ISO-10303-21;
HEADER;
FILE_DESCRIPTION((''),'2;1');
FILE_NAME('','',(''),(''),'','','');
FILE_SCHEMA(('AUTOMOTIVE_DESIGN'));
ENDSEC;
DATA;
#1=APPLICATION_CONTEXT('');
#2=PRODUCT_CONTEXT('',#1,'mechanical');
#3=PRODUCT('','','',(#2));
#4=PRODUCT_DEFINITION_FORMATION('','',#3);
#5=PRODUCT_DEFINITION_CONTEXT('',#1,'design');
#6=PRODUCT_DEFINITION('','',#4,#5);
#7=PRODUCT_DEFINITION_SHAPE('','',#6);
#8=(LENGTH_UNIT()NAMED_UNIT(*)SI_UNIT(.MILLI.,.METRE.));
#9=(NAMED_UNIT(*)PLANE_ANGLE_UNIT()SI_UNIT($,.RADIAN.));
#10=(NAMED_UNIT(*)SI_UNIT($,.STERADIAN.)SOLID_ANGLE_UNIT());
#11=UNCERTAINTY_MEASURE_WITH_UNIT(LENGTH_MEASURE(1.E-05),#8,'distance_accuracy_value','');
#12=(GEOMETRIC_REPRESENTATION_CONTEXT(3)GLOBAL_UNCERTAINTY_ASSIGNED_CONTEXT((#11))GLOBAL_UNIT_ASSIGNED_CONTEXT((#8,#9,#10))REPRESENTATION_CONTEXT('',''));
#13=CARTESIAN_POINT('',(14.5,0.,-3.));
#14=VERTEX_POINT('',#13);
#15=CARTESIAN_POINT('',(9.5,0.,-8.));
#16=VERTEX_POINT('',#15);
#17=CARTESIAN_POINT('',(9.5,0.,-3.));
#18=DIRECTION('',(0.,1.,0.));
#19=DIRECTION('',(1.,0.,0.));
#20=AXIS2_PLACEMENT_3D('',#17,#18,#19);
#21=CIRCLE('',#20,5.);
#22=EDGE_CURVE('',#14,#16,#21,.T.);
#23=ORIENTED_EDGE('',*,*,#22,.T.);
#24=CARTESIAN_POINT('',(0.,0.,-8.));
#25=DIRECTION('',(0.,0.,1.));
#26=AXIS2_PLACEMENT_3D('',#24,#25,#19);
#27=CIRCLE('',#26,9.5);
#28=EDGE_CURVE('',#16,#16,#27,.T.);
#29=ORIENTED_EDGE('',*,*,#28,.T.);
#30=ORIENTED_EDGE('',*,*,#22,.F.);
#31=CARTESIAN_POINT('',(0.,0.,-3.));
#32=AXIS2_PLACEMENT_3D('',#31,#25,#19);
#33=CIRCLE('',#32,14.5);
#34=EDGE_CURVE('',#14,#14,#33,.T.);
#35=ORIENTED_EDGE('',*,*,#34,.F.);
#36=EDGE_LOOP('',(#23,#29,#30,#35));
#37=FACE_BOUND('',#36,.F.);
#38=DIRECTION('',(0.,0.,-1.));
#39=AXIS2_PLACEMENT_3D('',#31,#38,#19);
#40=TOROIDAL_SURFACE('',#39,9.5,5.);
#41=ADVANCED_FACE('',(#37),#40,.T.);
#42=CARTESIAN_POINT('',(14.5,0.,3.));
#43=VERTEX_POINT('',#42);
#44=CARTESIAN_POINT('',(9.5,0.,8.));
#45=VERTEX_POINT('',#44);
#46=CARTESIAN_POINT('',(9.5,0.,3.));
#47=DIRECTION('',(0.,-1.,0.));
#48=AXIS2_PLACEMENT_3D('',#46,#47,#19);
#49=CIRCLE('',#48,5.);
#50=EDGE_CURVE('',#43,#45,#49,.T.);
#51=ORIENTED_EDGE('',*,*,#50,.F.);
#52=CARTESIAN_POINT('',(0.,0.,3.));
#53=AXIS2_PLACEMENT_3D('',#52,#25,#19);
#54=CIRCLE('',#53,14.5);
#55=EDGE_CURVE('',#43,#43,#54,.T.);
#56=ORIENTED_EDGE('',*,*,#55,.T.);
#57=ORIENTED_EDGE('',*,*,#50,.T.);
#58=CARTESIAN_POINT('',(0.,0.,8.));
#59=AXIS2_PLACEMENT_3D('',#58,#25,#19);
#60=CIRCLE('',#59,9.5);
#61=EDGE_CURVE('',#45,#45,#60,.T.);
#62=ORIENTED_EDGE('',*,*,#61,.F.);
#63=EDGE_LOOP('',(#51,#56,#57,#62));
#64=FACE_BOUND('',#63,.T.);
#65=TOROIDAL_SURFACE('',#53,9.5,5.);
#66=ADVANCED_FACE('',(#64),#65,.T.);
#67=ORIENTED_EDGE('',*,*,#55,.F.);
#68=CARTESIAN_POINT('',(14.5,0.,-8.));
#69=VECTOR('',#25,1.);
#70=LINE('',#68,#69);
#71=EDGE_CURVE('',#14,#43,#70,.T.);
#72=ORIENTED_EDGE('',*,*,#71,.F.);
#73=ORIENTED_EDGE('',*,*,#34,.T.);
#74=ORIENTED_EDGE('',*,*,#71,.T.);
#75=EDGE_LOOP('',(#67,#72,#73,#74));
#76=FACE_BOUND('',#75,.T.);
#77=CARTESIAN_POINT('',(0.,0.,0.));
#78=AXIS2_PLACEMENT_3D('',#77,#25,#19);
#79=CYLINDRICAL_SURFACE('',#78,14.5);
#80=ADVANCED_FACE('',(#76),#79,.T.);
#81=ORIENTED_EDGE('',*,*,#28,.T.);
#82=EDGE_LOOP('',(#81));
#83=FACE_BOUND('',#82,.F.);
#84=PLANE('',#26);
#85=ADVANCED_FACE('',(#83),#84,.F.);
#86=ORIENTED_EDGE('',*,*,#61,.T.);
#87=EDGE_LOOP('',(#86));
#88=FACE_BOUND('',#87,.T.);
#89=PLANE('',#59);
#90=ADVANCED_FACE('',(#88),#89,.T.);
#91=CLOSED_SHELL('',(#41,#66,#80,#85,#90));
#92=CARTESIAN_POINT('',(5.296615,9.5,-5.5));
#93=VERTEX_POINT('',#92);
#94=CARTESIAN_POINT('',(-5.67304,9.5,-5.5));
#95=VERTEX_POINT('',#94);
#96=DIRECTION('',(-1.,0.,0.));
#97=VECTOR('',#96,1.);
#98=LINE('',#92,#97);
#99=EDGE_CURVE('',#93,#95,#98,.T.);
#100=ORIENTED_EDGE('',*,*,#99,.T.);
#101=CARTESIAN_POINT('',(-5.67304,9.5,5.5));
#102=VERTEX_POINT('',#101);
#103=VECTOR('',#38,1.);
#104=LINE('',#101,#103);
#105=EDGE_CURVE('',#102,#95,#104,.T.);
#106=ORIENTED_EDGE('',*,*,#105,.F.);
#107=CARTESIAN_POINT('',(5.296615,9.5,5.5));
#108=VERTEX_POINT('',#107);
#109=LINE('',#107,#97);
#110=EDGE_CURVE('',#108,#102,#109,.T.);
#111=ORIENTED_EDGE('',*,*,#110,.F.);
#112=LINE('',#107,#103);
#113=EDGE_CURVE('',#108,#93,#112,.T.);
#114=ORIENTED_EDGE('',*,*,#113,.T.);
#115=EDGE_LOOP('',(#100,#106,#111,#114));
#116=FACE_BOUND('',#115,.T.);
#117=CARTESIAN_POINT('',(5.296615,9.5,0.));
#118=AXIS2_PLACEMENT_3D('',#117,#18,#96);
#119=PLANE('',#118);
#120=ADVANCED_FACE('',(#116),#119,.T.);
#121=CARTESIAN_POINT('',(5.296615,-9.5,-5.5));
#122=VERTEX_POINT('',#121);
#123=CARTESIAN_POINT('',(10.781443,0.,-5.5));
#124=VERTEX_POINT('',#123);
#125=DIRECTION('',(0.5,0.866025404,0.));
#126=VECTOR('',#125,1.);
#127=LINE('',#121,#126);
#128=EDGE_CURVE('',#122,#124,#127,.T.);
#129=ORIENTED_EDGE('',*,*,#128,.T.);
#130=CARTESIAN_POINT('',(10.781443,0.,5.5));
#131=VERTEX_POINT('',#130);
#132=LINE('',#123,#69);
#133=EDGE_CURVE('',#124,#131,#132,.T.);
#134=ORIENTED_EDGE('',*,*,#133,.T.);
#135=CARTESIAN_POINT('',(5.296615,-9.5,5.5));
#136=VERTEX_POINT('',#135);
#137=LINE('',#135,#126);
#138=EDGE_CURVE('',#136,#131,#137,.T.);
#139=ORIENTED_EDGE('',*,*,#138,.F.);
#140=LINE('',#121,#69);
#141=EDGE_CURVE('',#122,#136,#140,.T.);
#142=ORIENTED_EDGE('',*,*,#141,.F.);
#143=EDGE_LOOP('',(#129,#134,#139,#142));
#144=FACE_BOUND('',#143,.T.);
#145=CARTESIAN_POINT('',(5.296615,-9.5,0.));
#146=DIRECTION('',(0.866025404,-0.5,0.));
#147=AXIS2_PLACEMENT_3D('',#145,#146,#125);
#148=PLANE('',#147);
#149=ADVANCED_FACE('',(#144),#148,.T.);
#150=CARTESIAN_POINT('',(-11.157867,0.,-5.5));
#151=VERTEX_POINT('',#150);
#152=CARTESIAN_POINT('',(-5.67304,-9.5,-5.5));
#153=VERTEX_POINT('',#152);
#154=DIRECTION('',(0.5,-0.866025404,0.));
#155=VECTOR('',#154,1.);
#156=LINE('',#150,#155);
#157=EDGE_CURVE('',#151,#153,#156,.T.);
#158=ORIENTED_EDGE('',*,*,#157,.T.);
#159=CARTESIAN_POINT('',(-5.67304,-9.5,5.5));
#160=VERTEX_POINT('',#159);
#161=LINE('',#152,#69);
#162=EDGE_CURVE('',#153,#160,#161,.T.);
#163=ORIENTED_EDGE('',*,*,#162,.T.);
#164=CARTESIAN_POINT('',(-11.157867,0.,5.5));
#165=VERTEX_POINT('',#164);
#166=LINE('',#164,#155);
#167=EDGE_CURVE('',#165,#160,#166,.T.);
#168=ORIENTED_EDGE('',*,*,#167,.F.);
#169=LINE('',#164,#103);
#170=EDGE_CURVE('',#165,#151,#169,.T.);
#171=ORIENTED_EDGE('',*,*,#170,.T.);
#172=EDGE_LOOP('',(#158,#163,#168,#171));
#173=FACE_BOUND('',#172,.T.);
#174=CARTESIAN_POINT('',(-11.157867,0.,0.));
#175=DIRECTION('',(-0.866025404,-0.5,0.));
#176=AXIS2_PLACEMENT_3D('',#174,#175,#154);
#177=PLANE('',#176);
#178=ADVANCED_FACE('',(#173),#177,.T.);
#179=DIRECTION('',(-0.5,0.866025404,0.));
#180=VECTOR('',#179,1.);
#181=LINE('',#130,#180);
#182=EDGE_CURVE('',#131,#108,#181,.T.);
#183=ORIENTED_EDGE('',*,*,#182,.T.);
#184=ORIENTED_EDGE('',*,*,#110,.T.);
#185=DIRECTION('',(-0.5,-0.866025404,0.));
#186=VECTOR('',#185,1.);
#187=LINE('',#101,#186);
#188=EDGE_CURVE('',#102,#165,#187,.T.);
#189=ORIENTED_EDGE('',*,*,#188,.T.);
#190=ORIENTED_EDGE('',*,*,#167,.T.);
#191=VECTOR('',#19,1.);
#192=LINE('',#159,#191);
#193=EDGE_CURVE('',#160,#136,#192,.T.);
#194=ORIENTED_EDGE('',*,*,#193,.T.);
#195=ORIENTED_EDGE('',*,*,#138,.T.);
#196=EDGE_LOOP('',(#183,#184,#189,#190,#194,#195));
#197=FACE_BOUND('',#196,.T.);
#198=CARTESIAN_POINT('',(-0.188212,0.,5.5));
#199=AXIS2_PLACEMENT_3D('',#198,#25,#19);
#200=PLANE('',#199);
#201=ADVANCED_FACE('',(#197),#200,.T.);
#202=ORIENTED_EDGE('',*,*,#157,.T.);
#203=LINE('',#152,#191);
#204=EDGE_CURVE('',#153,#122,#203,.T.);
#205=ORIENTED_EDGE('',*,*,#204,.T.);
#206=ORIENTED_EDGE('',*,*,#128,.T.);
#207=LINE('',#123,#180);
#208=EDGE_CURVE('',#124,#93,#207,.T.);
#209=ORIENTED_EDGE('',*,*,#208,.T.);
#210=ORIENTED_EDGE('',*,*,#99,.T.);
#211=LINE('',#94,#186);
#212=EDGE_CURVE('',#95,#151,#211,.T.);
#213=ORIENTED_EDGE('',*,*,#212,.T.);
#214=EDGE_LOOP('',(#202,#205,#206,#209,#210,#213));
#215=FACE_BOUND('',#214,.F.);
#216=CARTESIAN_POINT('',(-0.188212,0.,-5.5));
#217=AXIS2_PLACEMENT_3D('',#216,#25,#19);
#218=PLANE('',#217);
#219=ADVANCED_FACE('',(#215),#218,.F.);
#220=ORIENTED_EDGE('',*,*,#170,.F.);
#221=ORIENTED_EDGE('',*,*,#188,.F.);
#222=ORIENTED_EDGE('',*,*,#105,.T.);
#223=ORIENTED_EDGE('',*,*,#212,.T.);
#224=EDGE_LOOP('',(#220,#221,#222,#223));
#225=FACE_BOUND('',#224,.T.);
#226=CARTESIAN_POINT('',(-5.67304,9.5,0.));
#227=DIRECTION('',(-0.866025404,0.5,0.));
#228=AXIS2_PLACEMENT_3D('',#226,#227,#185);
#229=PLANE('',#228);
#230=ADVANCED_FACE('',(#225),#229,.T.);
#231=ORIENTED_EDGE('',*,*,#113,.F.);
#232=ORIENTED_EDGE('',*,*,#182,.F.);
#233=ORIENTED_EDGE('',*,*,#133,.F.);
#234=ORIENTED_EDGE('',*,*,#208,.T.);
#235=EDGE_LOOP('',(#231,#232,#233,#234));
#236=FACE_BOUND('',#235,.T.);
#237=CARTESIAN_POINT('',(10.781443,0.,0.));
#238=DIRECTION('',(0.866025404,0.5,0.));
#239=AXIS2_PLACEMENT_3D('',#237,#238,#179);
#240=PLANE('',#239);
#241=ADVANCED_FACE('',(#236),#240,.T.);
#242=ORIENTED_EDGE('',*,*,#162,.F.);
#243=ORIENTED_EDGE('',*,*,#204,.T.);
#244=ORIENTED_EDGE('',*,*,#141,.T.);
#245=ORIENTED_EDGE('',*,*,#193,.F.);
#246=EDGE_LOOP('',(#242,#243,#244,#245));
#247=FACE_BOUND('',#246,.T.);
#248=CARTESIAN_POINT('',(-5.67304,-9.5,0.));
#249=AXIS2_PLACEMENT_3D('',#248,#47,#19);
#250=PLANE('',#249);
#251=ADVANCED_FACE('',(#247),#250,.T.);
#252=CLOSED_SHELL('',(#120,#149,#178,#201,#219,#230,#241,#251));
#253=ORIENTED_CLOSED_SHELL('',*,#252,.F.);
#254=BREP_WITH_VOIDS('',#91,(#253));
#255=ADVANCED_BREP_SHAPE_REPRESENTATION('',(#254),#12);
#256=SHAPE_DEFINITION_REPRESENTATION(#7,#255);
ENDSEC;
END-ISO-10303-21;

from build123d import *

# Parameters (mm, degrees)
F1_R     = 14.5
F2_DEPTH = 8
F4_DEPTH = 5.5
F5_R     = 5


with BuildPart() as f2:
    # F1 (on Top) → F2 (new body, symmetric)
    with BuildSketch(Plane.XY):
        Circle(F1_R)
    extrude(amount=F2_DEPTH, both=True)

    # F3 (on Top) → F4 (cut, symmetric)
    with BuildSketch(Plane.XY):
        Polygon((-11.1578674376, 0), (-5.6730398803, -9.5), (5.2966152343, -9.5), (10.7814427916, 0), (5.2966152343, 9.5), (-5.6730398803, 9.5), align=None)
    extrude(amount=F4_DEPTH, both=True, mode=Mode.SUBTRACT)

    # F5
    f5_edges = [f2.edges().sort_by_distance(p)[0] for p in [
        (-14.5, 0, 8),
        (-14.5, 0, -8),
    ]]
    fillet(f5_edges, radius=F5_R)


solid = f2.part
